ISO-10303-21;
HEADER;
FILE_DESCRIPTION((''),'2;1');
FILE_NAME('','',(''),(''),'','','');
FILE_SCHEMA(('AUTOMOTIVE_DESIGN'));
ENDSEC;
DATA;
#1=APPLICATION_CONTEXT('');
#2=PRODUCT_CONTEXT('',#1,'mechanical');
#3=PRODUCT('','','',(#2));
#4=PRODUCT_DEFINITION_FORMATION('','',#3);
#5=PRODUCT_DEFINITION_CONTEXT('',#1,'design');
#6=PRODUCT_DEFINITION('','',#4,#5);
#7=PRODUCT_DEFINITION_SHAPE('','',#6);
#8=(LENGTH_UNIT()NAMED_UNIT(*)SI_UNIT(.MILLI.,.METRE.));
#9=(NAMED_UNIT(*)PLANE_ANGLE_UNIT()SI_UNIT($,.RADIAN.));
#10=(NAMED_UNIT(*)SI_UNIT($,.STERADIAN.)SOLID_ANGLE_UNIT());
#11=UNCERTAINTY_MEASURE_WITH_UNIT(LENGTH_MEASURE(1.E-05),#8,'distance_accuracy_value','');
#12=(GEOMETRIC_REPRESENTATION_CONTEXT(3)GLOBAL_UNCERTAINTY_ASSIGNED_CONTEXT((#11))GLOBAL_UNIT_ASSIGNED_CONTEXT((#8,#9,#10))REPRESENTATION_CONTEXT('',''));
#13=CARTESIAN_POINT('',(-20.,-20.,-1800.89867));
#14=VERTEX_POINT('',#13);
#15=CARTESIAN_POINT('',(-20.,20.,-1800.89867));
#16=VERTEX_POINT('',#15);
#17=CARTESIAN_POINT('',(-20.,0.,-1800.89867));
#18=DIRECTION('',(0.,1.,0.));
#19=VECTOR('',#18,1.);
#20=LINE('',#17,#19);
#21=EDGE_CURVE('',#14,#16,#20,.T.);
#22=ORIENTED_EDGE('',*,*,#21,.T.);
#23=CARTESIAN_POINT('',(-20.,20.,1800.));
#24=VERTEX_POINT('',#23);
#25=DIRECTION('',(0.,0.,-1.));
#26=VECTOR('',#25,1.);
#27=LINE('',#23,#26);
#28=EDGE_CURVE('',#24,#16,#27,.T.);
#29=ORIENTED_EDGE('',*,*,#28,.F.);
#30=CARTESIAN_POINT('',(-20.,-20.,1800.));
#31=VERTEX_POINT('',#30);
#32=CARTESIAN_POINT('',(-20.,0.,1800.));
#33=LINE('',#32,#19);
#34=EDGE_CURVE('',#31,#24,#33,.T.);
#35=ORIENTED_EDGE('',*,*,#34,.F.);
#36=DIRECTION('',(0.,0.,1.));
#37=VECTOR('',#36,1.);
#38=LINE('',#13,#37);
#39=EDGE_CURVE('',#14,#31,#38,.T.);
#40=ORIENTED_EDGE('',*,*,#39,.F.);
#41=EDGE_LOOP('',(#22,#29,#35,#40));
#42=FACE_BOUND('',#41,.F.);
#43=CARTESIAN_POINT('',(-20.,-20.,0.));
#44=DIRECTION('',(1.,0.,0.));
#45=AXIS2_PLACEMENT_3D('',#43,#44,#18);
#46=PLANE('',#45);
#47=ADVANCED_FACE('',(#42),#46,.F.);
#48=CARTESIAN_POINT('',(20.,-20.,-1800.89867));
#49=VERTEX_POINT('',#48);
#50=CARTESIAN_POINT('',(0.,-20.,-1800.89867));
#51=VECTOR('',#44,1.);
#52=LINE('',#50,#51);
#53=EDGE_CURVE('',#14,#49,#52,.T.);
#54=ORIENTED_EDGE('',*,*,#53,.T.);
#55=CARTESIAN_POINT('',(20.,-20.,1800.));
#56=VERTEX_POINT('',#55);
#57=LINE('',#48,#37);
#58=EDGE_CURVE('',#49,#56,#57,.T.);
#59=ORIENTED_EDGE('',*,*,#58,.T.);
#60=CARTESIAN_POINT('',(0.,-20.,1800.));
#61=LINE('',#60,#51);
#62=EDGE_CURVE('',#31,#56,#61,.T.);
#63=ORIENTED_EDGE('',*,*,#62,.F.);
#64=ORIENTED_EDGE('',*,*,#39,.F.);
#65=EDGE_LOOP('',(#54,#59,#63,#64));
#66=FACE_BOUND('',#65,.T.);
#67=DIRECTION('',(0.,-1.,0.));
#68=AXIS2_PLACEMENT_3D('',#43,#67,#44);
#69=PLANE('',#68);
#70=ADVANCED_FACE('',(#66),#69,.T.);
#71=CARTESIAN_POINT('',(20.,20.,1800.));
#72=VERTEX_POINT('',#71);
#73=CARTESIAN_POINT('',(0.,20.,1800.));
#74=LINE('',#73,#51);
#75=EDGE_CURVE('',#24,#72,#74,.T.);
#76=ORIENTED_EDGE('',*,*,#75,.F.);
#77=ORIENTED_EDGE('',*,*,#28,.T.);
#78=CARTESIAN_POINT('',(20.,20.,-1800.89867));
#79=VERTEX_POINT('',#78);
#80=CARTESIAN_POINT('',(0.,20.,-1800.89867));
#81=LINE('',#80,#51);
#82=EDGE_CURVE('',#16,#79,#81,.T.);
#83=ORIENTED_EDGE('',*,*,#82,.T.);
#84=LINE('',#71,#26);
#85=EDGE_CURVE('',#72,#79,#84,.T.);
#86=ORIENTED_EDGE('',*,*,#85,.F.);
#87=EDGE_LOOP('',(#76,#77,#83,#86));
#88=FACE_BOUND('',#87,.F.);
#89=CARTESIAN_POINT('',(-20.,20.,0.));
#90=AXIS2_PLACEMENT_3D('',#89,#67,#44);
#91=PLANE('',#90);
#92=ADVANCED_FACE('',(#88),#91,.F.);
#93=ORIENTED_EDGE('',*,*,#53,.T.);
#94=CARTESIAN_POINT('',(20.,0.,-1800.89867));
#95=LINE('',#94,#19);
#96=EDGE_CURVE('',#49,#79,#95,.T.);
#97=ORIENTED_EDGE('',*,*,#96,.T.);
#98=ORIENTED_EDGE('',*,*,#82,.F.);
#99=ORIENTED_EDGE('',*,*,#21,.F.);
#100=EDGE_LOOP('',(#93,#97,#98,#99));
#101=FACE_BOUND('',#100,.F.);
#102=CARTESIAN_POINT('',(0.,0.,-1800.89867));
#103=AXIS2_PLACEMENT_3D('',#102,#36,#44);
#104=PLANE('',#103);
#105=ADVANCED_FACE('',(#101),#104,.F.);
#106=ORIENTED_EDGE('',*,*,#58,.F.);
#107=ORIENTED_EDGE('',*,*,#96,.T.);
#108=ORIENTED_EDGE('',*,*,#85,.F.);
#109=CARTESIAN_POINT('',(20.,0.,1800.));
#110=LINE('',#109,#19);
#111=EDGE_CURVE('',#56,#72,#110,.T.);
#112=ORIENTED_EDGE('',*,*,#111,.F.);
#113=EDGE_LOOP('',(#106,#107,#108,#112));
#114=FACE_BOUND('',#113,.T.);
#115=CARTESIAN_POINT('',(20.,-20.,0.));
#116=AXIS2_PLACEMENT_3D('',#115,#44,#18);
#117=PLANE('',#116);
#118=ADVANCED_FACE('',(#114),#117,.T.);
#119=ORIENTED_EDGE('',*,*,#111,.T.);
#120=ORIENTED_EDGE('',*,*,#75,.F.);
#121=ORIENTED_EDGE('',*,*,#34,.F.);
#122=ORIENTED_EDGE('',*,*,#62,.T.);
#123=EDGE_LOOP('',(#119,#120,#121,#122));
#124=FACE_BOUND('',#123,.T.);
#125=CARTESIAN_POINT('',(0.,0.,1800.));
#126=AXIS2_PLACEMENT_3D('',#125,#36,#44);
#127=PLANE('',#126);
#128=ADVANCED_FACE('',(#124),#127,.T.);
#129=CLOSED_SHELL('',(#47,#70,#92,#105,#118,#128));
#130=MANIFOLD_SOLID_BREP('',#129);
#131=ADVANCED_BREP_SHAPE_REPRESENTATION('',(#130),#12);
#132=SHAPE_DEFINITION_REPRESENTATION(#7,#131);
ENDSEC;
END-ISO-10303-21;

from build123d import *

# Parameters (mm, degrees)
F0_W     = 40
F0_H     = 40
F1_DEPTH = 1800
F2_DEPTH = 1800.8986695


# Not quite as in the source:
# - an extrude ends at something that could not be found from the text; its depth is read off the source's solid


with BuildPart() as f1:
    # F0 (on Top) → F1 (new body)
    with BuildSketch(Plane.XY):
        Rectangle(F0_W, F0_H)
    extrude(amount=F1_DEPTH)

    # F2 (add, through all): a face of the model
    f2_faces = [f1.faces().sort_by_distance(p)[0] for p in [
        (0, 0, 0),
    ]]
    extrude(f2_faces, amount=F2_DEPTH)


solid = f1.part
